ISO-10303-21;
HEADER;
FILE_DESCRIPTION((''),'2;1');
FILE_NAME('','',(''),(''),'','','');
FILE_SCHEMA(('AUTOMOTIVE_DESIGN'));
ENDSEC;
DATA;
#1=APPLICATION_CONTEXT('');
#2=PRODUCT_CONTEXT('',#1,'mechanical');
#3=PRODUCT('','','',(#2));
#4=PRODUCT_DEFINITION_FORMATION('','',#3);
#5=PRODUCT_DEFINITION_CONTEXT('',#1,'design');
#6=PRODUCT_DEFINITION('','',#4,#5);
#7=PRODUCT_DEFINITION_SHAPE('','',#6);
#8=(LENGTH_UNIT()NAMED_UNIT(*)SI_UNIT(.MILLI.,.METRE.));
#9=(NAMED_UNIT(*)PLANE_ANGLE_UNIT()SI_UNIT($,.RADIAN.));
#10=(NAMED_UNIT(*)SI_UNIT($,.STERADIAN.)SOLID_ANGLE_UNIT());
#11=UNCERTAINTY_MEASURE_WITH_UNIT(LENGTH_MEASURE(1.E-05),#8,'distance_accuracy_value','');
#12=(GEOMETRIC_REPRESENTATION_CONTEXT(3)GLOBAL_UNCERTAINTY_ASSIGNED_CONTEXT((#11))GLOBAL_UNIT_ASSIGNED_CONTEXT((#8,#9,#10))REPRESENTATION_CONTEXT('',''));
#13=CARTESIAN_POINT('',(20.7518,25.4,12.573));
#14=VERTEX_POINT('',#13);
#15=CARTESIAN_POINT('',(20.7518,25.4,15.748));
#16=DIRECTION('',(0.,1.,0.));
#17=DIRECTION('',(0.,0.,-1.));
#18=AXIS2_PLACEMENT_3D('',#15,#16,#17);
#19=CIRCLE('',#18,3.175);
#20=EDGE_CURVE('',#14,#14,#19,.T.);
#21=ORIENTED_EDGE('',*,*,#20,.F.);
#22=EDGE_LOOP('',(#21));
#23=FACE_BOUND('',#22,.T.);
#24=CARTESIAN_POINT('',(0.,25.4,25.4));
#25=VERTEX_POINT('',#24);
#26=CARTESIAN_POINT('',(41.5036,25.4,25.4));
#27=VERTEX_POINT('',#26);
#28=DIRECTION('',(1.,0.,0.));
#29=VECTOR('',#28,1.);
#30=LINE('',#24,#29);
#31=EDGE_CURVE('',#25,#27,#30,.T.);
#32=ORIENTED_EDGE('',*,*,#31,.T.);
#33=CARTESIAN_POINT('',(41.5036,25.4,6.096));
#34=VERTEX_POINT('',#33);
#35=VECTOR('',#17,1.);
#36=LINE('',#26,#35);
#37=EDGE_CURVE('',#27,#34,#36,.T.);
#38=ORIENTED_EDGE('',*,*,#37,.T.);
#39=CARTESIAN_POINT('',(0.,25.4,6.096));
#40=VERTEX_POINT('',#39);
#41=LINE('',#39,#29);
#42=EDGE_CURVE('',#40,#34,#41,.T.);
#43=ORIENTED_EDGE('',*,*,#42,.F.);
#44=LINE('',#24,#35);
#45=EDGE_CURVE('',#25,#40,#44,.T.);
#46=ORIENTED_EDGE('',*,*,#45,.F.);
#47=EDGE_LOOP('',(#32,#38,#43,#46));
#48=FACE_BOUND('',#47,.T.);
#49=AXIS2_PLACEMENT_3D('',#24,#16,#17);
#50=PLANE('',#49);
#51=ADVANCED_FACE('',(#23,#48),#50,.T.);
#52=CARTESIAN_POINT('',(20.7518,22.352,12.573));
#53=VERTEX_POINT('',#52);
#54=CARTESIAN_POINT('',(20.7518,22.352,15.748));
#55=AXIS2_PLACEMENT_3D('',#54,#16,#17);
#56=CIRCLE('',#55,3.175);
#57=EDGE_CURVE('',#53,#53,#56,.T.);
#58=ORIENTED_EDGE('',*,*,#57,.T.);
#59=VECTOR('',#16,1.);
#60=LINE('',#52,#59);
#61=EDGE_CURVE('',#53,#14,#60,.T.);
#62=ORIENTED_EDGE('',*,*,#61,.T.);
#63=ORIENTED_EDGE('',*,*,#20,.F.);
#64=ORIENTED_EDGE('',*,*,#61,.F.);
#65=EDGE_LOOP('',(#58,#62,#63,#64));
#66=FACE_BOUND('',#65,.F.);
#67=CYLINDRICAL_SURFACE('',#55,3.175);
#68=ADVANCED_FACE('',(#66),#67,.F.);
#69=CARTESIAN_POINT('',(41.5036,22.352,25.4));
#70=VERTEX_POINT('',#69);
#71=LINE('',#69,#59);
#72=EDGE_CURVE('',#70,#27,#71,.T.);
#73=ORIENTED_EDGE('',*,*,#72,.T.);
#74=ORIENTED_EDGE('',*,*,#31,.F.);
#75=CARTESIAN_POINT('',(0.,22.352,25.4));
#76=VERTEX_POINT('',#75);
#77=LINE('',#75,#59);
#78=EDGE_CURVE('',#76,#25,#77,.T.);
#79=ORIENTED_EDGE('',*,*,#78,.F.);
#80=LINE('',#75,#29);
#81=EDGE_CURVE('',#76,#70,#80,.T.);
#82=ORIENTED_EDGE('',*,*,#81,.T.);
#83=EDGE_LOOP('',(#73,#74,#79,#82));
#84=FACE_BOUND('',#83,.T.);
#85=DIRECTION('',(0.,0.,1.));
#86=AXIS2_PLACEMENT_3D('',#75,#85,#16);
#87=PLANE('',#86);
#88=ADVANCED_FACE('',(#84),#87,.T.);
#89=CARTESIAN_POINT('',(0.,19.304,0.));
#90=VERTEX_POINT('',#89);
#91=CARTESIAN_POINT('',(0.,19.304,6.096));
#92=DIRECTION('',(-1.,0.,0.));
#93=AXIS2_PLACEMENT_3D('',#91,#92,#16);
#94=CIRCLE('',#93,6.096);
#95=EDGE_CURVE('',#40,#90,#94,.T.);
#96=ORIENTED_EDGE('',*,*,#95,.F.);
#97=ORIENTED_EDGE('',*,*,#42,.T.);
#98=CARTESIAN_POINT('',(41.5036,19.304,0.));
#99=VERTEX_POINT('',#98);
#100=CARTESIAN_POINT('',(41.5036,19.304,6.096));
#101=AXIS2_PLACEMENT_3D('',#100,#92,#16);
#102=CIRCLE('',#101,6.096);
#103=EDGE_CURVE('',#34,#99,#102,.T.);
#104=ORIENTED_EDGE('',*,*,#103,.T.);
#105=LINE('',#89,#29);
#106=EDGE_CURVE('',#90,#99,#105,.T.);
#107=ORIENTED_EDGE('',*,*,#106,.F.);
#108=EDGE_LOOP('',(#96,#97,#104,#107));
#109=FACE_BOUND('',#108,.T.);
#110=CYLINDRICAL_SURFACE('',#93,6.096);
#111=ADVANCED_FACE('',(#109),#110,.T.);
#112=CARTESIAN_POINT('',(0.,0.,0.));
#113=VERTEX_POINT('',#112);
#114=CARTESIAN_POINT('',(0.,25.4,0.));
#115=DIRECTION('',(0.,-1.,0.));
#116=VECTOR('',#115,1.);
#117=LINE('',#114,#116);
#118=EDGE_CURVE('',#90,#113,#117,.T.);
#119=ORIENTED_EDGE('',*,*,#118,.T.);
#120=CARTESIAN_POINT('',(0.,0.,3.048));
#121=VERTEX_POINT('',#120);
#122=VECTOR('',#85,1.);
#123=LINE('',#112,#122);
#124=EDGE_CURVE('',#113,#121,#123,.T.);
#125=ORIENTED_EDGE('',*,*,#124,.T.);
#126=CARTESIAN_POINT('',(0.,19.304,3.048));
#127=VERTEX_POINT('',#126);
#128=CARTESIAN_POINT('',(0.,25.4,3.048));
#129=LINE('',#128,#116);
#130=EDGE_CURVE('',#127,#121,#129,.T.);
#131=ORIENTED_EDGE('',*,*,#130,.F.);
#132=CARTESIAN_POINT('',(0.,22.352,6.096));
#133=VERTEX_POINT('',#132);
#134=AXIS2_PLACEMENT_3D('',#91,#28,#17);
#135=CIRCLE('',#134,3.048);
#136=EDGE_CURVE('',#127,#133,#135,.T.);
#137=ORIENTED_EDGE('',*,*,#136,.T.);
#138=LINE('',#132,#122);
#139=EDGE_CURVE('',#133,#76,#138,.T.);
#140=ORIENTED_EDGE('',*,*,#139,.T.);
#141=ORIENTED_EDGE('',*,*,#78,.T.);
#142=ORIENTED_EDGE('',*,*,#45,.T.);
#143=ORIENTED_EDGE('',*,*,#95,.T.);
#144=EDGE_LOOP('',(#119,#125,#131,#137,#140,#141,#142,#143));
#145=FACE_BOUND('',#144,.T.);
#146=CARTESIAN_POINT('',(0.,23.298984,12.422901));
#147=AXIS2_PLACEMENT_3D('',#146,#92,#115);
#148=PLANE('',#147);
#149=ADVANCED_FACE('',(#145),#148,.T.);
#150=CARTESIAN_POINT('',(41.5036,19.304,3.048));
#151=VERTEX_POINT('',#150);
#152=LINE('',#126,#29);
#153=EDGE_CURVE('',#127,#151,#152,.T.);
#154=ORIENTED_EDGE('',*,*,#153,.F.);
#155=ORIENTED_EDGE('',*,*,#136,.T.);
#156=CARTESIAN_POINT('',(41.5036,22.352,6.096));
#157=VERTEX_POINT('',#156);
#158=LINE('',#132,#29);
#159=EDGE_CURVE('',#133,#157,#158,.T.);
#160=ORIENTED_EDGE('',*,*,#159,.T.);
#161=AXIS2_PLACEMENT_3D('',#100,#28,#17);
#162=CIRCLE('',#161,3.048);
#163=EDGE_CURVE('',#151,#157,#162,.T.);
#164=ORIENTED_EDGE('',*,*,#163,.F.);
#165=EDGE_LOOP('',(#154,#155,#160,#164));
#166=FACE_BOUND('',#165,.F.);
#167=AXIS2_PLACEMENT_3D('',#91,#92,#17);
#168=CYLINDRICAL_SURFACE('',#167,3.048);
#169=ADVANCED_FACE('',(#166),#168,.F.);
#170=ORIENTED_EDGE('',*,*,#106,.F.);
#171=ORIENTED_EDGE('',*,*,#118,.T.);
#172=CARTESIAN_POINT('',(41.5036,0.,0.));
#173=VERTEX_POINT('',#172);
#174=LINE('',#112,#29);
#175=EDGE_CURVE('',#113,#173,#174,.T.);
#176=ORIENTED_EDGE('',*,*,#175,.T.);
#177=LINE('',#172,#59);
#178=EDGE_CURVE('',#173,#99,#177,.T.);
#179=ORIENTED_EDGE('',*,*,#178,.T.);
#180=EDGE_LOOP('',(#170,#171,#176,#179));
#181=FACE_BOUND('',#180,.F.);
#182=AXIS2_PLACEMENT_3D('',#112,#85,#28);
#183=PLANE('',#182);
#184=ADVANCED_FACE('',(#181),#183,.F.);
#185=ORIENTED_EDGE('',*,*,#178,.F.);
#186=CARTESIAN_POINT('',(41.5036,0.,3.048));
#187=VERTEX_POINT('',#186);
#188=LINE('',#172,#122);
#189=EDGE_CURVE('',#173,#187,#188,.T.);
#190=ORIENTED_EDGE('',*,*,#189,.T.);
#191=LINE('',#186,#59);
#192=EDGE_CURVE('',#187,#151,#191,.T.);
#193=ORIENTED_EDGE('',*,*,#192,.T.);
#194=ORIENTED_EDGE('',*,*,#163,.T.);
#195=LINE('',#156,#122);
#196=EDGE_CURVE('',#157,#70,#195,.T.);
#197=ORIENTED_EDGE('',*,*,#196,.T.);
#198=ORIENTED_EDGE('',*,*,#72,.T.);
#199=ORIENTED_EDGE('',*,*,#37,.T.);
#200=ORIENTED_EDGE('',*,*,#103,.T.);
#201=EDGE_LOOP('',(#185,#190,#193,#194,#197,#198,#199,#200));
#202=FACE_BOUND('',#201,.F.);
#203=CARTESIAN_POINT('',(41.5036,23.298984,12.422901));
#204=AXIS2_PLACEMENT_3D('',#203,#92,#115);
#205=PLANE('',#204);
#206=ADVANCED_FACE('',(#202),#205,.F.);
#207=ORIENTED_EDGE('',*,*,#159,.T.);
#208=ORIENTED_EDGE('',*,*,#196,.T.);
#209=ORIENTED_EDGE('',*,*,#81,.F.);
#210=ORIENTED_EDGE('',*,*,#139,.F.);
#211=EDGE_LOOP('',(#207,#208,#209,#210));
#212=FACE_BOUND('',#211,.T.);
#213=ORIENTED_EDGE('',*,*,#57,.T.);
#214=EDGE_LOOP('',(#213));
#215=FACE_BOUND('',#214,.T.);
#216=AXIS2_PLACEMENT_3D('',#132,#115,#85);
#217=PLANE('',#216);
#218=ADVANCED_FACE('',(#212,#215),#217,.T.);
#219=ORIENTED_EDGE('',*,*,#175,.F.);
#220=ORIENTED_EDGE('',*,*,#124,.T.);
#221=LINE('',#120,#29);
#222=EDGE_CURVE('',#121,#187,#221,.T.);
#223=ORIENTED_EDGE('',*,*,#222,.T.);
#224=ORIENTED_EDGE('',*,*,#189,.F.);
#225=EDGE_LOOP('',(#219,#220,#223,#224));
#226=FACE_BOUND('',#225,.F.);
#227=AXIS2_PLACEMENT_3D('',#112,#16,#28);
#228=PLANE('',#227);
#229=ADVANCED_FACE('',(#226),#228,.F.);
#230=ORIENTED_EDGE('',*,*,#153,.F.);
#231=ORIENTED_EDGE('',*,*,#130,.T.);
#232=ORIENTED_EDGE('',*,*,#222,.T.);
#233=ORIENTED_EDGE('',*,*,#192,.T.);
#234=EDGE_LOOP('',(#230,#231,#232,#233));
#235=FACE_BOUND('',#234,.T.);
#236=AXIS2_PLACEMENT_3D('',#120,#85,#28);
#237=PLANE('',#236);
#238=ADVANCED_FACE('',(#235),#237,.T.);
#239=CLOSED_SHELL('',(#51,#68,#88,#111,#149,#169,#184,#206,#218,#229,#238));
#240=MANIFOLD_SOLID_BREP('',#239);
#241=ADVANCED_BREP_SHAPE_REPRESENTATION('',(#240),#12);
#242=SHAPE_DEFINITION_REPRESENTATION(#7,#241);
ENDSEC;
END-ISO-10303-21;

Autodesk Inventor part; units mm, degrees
ref_plane "YZ Plane" through (0, 0, 0) normal (1, 0, 0) x (0, 1, 0)
ref_plane "XZ Plane" through (0, 0, 0) normal (0, 1, 0) x (-1, 0, 0)
ref_plane "XY Plane" through (0, 0, 0) normal (0, 0, 1) x (1, 0, 0)
sketch "Sketch1" plane through (0, 0, 0) normal (0, 0, 1) x (1, 0, 0)
  line L0 (0, 0) -> (41.5036, 0)
  line L1 (41.5036, 0) -> (41.5036, 25.4)
  line L2 (41.5036, 25.4) -> (0, 25.4)
  line L3 (0, 25.4) -> (0, 0)
  dimension "d0" = 41.5036
  dimension "d1" = 25.4
extrude "Plate1" add sketch "Sketch1" along normal blind 3.048
sketch "Sketch3" plane through (0, 22.352, 0) normal (0, 1, 0) x (-1, 0, 0)
  line L0 (-41.5036, 0) -> (0, 0)
  line L1 (0, 0) -> (0, 25.4)
  line L2 (0, 25.4) -> (-41.5036, 25.4)
  line L3 (-41.5036, 25.4) -> (-41.5036, 0)
edge flange "Flange2" height 25.4 angle 90 thickness 3.048 bend radius 3.048 thickness toward (0, 1, 0) relief tear relief width 3.048 relief depth 1.524 edges at (20.7518, 25.4, 3.048) wall of the first edge with corners at (41.5036, 22.352, 0) (0, 22.352, 0) (0, 22.352, 25.4) (41.5036, 22.352, 25.4)
bend "Bend2"
corner "Corner2"
hole "Hole1" at (20.7518, 22.352, 15.748) direction (0, 1, 0) diameter 6.35 end through all
equation "\"d30\" = Thickness"
equation "\"d13\" = BendReliefWidth"
equation "\"d14\" = BendReliefDepth"
equation "\"d15\" = MinimumRemnant"
equation "\"d16\" = BendRadius"
equation "\"d19\" = BendRadius"
equation "\"d20\" = CornerReliefSize"
equation "\"d21\" = GapSize"
equation "\"d22\" = JacobiRadiusSize"
equation "\"BendRadius\" = Thickness"
equation "\"BendReliefWidth\" = Thickness"
equation "\"BendReliefDepth\" = 0.5 * Thickness"
equation "\"CornerReliefSize\" = 4 * Thickness"
equation "\"MinimumRemnant\" = 2 * Thickness"
equation "\"TransitionRadius\" = BendRadius"
equation "\"JacobiRadiusSize\" = BendRadius"
equation "\"GapSize\" = Thickness"
equation "\"d2\" = BendRadius"
equation "\"Thickness\" = 3.048"
properties part number "Chain Tension - L Bracket - Base"
